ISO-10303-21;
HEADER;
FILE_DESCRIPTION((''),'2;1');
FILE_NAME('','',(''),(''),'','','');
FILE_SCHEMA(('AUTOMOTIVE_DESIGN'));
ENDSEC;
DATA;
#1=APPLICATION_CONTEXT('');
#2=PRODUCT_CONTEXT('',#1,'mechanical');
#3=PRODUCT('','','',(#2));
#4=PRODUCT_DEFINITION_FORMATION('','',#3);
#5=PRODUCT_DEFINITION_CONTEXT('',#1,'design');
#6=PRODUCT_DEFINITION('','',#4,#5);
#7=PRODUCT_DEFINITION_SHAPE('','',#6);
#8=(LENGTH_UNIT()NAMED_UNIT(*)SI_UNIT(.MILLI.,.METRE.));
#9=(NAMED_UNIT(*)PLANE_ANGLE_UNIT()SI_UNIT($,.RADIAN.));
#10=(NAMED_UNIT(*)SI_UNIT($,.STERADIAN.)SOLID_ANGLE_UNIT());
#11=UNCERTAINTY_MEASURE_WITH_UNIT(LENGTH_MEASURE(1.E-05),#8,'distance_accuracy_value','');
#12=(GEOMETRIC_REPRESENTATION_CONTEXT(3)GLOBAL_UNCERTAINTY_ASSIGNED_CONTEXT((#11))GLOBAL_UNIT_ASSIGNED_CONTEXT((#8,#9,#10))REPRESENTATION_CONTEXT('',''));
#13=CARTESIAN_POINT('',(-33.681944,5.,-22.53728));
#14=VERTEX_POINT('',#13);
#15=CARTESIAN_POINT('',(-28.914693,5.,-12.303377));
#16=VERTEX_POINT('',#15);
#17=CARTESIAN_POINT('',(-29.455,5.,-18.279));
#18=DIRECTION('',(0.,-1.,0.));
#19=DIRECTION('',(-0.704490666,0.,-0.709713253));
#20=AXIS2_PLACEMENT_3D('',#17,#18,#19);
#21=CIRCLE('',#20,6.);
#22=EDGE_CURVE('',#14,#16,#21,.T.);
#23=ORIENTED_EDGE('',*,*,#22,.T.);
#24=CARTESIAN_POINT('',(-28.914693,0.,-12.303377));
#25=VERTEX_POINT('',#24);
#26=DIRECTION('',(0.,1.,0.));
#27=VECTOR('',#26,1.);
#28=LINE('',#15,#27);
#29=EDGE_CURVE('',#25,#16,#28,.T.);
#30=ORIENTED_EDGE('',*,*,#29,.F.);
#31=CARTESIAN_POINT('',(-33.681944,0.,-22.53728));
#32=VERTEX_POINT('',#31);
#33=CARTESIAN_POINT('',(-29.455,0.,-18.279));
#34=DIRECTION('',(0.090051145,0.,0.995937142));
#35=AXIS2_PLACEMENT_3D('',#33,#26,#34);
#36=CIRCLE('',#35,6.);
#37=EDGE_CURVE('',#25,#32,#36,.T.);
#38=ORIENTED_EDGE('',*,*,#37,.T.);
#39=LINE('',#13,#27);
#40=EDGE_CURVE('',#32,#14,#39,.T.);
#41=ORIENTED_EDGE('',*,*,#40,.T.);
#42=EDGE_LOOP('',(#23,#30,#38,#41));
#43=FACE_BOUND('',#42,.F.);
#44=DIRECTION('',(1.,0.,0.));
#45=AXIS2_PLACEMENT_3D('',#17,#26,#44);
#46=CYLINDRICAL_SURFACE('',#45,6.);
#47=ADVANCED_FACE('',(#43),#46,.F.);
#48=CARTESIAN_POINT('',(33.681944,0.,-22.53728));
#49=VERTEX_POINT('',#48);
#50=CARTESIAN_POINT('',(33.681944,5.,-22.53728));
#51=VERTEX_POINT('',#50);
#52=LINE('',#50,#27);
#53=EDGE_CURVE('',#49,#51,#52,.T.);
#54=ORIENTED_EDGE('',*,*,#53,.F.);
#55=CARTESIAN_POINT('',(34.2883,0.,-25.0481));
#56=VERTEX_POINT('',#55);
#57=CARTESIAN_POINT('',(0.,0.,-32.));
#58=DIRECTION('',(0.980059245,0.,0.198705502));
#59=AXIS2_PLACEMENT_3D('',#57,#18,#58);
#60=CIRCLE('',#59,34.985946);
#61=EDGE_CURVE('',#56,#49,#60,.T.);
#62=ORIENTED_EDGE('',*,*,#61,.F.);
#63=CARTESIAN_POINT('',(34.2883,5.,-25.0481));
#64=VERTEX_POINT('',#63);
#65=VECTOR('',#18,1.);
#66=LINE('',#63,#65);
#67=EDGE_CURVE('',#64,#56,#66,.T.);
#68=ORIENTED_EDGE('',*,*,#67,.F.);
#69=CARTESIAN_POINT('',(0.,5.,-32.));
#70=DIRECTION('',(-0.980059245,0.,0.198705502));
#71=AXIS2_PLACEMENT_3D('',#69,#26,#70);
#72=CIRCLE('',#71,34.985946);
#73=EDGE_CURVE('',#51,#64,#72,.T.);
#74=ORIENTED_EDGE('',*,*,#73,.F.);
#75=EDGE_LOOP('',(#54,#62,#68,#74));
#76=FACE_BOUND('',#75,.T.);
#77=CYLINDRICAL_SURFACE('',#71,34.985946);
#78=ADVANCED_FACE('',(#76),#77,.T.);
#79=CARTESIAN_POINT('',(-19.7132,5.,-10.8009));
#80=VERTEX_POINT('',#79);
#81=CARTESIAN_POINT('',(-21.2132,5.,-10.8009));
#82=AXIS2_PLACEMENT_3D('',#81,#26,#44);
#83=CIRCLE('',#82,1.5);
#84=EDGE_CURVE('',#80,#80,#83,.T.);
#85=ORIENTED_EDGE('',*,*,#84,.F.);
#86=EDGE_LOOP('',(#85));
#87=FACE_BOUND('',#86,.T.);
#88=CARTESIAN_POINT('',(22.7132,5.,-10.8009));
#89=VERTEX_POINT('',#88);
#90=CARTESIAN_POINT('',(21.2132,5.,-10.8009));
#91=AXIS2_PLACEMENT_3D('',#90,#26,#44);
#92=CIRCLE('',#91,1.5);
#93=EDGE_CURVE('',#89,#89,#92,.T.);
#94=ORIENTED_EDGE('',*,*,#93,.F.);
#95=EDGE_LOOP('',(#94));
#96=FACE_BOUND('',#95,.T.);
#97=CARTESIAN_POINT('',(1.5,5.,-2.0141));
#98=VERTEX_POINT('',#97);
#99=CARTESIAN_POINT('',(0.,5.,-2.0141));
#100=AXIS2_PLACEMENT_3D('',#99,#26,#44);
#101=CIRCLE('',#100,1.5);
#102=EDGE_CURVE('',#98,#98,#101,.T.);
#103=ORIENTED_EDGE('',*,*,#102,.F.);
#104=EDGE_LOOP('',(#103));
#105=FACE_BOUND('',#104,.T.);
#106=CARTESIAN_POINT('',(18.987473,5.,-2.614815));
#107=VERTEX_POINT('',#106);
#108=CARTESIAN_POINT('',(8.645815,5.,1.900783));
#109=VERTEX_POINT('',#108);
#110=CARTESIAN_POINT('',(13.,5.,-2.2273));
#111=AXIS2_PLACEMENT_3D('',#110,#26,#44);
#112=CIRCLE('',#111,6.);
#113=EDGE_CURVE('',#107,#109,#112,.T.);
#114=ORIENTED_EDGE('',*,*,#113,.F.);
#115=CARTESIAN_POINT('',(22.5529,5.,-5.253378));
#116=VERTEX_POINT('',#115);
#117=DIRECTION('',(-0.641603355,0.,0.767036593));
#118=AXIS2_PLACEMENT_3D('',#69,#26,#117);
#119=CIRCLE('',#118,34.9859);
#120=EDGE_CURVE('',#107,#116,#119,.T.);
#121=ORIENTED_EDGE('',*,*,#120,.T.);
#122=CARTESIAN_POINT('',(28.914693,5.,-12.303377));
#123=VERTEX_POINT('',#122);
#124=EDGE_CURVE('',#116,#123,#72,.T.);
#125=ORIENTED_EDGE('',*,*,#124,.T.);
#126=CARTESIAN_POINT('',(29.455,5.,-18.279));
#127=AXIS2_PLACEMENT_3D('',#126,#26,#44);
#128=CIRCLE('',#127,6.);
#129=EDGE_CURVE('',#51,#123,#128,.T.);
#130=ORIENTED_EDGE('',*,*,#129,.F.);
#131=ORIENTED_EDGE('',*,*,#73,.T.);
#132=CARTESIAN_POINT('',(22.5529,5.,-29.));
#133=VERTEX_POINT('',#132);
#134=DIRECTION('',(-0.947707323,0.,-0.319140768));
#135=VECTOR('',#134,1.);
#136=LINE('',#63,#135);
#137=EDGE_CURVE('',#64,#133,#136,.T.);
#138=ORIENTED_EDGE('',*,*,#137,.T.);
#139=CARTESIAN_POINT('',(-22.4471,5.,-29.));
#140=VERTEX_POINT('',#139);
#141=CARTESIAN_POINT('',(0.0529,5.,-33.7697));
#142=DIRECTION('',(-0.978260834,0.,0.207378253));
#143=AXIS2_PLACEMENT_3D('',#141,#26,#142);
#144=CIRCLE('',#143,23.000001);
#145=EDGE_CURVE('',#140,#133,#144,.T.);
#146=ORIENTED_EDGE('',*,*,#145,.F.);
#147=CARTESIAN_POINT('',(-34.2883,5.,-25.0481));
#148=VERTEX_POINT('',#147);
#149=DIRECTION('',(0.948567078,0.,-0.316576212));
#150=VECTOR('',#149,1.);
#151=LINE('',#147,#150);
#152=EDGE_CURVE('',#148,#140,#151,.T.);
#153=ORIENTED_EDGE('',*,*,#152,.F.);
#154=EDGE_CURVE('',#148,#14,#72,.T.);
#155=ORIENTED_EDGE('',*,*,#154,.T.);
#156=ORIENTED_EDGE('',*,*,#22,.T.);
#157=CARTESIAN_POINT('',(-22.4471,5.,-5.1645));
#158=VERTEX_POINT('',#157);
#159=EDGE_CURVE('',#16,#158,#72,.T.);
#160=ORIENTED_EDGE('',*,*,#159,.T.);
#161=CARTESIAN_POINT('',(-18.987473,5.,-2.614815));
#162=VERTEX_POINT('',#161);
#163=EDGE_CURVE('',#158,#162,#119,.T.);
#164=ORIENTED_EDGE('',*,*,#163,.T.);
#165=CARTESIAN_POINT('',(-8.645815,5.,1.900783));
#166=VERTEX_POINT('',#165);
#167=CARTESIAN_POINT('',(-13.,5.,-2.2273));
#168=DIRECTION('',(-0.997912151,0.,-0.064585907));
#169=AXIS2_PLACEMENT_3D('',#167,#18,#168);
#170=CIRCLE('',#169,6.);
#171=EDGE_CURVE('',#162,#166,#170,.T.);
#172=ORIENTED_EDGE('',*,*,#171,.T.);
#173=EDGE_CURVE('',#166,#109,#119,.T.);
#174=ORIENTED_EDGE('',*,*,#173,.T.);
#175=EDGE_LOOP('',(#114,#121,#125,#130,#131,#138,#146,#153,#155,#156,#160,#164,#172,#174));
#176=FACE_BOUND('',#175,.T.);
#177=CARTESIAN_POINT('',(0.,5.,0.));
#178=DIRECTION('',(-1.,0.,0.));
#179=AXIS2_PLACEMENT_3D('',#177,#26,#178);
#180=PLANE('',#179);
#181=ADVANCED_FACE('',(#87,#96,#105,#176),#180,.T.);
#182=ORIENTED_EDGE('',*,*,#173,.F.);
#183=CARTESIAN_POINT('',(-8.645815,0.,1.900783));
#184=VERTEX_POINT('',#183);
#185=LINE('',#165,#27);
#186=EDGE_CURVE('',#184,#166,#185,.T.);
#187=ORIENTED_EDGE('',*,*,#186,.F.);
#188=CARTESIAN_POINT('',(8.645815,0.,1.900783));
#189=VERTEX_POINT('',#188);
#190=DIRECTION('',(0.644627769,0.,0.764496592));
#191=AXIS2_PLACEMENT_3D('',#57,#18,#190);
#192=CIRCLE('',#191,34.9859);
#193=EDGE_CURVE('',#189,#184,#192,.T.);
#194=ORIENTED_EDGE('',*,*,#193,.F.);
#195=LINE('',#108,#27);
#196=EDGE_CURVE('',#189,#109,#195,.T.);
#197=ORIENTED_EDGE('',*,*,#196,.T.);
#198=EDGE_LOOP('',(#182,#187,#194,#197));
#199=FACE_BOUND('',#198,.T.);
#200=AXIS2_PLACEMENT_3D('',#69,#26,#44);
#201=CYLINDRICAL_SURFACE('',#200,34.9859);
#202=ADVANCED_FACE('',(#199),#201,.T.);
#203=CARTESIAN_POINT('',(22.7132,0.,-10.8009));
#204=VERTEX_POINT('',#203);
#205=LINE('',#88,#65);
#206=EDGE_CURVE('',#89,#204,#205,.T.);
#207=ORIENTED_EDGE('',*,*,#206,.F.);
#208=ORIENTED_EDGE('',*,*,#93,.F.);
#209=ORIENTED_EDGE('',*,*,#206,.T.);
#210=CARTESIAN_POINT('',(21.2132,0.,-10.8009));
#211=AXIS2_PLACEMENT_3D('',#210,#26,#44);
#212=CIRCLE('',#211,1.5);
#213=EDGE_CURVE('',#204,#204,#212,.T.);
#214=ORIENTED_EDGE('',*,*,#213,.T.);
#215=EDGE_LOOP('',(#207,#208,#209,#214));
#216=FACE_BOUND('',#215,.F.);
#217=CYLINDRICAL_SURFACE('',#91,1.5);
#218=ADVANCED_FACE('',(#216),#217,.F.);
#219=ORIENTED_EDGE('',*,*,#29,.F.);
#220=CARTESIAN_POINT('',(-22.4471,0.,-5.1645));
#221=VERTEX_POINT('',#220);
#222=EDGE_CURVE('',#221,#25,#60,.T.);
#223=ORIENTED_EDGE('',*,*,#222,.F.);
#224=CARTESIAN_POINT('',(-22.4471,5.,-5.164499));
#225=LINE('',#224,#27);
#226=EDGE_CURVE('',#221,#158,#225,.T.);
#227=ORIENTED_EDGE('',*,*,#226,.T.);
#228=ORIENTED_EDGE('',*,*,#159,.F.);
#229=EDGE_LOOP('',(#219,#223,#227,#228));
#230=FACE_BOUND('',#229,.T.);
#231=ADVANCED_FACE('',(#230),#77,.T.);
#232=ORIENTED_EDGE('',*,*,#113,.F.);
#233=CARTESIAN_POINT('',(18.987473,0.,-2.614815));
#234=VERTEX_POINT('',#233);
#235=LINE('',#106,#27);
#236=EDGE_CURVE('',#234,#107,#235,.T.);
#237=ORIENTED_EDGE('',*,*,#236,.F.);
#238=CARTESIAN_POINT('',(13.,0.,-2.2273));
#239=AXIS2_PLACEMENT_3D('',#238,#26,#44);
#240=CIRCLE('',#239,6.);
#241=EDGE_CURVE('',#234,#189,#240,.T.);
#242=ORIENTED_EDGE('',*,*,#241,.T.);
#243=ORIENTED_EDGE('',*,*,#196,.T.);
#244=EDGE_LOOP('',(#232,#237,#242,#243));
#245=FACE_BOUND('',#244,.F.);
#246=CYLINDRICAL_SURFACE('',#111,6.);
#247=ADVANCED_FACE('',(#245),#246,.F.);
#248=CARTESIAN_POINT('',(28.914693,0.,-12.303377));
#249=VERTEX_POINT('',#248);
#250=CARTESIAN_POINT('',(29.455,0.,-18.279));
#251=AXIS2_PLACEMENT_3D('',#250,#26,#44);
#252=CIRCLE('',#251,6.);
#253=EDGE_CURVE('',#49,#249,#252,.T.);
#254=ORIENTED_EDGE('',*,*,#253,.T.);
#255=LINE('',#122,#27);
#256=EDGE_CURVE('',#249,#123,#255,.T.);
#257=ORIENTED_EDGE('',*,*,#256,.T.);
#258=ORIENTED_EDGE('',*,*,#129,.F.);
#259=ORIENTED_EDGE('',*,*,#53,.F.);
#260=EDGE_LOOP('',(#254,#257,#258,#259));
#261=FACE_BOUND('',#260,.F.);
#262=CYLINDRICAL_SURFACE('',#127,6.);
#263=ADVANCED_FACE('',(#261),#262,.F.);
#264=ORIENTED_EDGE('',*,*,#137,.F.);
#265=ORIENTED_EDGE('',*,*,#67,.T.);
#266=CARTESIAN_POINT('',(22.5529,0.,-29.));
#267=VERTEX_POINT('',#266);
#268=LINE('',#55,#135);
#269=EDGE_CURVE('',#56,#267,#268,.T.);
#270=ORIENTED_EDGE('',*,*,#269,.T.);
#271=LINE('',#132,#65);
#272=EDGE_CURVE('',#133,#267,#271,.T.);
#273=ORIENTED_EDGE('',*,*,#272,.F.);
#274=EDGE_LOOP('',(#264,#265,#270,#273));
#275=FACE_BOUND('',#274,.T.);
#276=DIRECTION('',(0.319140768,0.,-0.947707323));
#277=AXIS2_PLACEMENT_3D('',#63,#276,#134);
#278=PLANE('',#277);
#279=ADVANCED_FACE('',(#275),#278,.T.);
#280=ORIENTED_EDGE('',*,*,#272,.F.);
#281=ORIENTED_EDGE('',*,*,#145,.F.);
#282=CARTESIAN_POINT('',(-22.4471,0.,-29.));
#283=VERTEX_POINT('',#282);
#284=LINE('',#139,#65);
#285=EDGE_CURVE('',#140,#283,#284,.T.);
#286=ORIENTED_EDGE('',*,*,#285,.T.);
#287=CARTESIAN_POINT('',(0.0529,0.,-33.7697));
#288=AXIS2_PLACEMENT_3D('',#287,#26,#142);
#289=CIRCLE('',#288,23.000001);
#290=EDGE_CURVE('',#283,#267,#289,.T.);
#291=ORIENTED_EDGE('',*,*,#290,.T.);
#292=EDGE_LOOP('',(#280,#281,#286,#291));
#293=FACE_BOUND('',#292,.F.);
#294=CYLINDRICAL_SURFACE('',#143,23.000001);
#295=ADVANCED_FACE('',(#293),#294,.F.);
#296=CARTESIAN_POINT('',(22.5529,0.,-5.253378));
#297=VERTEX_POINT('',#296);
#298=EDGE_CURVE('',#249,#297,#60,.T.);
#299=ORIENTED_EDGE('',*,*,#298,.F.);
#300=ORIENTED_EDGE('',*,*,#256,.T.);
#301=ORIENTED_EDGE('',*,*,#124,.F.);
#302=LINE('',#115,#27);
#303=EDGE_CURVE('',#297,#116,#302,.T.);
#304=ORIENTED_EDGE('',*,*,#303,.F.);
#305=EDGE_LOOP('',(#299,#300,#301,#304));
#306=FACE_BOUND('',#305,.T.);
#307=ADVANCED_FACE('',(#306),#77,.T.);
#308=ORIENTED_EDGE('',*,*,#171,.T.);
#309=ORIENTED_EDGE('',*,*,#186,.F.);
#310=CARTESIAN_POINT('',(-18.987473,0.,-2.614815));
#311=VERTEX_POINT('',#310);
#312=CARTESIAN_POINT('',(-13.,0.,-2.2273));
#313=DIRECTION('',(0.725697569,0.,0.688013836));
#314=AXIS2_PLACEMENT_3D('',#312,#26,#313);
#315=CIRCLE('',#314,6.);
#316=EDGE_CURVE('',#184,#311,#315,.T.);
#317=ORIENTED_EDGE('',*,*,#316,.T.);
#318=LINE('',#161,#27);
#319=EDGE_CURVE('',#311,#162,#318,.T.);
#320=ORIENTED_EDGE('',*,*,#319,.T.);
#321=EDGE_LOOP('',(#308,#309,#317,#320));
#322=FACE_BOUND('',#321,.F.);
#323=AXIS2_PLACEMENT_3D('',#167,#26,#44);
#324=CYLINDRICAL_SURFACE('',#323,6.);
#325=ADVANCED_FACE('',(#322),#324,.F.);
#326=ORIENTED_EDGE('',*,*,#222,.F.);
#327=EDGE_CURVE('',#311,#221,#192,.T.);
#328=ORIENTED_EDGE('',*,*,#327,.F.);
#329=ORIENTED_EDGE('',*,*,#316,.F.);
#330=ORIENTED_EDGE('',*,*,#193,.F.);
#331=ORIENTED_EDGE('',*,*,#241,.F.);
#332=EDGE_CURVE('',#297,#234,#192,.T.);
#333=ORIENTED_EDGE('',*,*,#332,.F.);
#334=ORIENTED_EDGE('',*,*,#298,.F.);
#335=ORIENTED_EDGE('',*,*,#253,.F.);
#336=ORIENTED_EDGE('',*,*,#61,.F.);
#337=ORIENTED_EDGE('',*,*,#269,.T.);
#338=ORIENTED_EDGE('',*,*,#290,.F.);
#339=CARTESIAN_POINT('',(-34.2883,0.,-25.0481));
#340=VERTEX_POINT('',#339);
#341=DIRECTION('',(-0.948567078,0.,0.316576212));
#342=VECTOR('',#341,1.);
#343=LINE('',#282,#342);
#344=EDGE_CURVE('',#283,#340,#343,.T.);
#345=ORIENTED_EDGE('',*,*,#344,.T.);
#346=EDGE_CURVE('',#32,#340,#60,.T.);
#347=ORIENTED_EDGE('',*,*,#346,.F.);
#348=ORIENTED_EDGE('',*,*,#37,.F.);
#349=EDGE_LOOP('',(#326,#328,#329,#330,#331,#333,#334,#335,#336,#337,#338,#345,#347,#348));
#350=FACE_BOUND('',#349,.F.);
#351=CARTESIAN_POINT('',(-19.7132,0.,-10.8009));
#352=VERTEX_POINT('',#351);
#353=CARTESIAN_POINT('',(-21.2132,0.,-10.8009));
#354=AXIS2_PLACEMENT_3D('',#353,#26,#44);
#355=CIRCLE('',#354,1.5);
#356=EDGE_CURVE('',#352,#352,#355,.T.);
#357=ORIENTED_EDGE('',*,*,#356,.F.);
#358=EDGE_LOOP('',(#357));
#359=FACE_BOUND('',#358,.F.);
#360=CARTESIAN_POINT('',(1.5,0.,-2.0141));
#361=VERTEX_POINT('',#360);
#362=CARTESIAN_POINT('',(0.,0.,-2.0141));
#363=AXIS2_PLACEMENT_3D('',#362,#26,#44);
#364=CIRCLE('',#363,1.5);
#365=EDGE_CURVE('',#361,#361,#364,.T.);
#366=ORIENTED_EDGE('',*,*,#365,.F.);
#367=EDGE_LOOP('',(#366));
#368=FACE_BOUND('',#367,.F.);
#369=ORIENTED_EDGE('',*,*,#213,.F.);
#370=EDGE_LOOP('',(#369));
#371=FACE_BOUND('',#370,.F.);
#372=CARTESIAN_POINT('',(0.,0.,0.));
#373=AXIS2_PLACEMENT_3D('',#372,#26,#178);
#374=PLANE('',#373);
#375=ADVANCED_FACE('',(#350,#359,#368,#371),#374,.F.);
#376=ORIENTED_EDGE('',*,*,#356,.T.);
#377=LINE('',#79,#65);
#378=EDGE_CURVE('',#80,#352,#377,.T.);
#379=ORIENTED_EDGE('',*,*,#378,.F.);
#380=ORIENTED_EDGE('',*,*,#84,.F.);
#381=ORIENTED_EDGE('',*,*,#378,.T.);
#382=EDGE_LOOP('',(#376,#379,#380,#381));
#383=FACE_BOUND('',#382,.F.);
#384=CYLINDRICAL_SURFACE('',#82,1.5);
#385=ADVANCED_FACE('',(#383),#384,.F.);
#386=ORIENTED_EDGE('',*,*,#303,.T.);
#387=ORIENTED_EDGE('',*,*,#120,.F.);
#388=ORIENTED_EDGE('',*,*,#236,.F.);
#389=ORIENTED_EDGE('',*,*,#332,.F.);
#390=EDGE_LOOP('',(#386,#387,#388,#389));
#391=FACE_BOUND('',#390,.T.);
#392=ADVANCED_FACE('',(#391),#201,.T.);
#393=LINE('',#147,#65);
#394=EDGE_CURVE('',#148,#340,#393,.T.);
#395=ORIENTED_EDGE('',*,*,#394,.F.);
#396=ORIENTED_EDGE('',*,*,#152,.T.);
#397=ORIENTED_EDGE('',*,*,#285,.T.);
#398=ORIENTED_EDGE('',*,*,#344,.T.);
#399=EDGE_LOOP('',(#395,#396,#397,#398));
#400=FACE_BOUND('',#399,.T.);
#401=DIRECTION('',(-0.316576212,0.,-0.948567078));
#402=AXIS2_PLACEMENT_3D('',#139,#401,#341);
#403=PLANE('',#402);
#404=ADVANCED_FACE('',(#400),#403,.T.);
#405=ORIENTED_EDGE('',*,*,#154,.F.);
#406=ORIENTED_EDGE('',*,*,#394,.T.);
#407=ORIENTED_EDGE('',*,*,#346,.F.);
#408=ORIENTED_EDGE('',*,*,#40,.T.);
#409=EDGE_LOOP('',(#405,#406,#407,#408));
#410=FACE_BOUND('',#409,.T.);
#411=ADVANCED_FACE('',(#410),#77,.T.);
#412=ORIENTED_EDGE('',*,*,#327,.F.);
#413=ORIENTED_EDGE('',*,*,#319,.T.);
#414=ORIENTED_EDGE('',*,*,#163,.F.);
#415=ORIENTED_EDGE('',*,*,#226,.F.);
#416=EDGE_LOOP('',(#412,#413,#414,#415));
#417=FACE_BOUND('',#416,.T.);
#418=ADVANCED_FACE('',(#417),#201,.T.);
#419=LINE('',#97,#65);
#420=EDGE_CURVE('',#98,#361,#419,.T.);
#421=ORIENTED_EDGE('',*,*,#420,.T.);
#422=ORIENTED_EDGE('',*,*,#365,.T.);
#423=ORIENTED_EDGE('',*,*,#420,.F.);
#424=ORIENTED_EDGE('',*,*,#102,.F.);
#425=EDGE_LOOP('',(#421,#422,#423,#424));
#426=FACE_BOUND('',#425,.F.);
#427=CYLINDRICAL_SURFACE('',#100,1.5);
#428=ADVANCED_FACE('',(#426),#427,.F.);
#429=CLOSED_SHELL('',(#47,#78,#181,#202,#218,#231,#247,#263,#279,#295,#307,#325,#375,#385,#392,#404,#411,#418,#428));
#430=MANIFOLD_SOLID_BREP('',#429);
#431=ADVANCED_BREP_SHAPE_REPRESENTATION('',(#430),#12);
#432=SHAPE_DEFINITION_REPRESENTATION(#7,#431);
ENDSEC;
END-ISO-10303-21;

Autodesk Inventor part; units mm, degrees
ref_plane "YZ Plane" through (0, 0, 0) normal (1, 0, 0) x (0, 1, 0)
ref_plane "XZ Plane" through (0, 0, 0) normal (0, 1, 0) x (-1, 0, 0)
ref_plane "XY Plane" through (0, 0, 0) normal (0, 0, 1) x (1, 0, 0)
sketch "Sketch1" plane through (0, 0, 0) normal (0, 1, 0) x (-1, 0, 0)
  line L0 (-22.5529, -44.0141) -> (22.4471, -44.0141)
  line L1 (-22.5529, -44.0141) -> (22.4471, -44.0141)
  line L2 (22.4471, 2.9859) -> (22.4471, -44.0141)
  line L3 (22.4471, 2.9859) -> (12.4471, 2.9859)
  line L4 (-22.5529, 2.9859) -> (-22.5529, -44.0141)
  line L5 (-22.5529, 2.9859) -> (-12.4471, 2.9859)
  arc A0 (-12.4471, 2.9859) -> (12.4471, 2.9859) centre (0, 4.1349) ccw
  circle A1 centre (-18.0529, -7.0141) radius 1.95
  circle A2 centre (-18.0529, -7.0141) radius 1.95
  circle A3 centre (17.9471, -7.0141) radius 1.95
  circle A4 centre (17.9471, -7.0141) radius 1.95
  circle A5 centre (0, -32.0141) radius 5.1
  circle A6 centre (-18.0529, -24.0142) radius 2
  circle A7 centre (-18, -40.0141) radius 2
  circle A8 centre (18, -40.0141) radius 2
  circle A9 centre (17.9471, -24.0142) radius 2
  line L6 (0, 4.1349) -> (0, -32.0141) construction
  point P0 (0, 0)
  dimension "d0" = 45
  dimension "d3" = 10
  dimension "d4" = 12.5
  dimension "d7" = 4.5
  dimension "d8" = 10
  dimension "d9" = 12
  dimension "d10" = 4
  dimension "d11" = 16
  dimension "d12" = 36
  dimension "d13" = 16
  dimension "d14" = 4.5
  dimension "d15" = 18
  dimension "d17" = 4.5
  dimension "d19" = 4
  dimension "d20" = 4
  dimension "d21" = 4
  dimension "d22" = 4
  dimension "d23" = 4
  dimension "d29" = 47
  dimension "d33" = 4.5
  dimension "d34" = 10
extrude "Extrusion1" add sketch "Sketch1" along normal blind 5
fillet "Fillet3" [suppressed]
fillet "Fillet4" [suppressed]
sketch "Sketch5" plane through (0, 5, 0) normal (0, 1, 0) x (1, 0, 0)
  arc A0 (12.4471, -2.9859) -> (-12.4471, -2.9859) centre (0, -4.1349) ccw projected
  arc A1 (12.4471, -2.9859) -> (-12.4471, -2.9859) centre (0, -4.1349) ccw
  line L0 (12.4471, -2.9859) -> (-12.4471, -2.9859)
  circle A2 centre (18.0529, 7.0141) radius 1.95 projected
  circle A3 centre (18.0529, 7.0141) radius 1.95
  circle A4 centre (-17.9471, 7.0141) radius 1.95 projected
  circle A5 centre (-17.9471, 7.0141) radius 1.95
  point P0 (0, 0)
extrude "Extrusion4" add sketch "Sketch5" against normal blind 5
sketch "Sketch8" plane through (0, 5, 0) normal (0, 1, 0) x (1, 0, 0)
  arc A0 (-25.3055, 28.046) -> (25.3055, 28.046) centre (0, 32) ccw
  arc A1 (-34.2883, 25.0481) -> (34.2883, 25.0481) centre (0, 32) ccw
  line L0 (-22.4471, -2.9859) -> (22.5529, -2.9859) projected
  line L1 (-22.4471, 44.0141) -> (-22.4471, -2.9859) projected
  line L2 (-22.4471, 29) -> (-34.2883, 25.0481)
  circle A2 centre (0, 32.0141) radius 5.1 projected
  line L3 (0, 32.0141) -> (0, 0) construction
  line L4 (-22.4471, 29) -> (-22.4471, 19.666)
  line L5 (34.2883, 25.0481) -> (22.5529, 29)
  line L6 (22.5529, -2.9859) -> (22.5529, 44.0141) projected
  line L7 (22.5529, 29) -> (22.5529, 19.8606)
extrude "Extrusion5" add sketch "Sketch8" against normal blind 5 contours L2 L1 A0 | A0 L1 A1 L2 | A0 L6 A1 L1 | L6 L5 A1
sketch "Sketch9" plane through (0, 5, 0) normal (0, 1, 0) x (1, 0, 0)
  circle A0 centre (0, 32) radius 34.9859
  line L0 (-22.4471, -2.9859) -> (22.5529, -2.9859) projected
  line L1 (22.5529, -2.9859) -> (22.5529, 5.2534) projected
  line L2 (22.5529, 5.2534) -> (22.5529, -2.9859)
  line L3 (22.5529, -2.9859) -> (-22.4471, -2.9859)
  line L4 (-22.4471, -2.9859) -> (-22.4471, 5.1645)
  point P0 (0, 0)
  point P1 (0, -2.9859)
sketch "Sketch6" plane through (0, 5, 0) normal (0, 1, 0) x (1, 0, 0)
  circle A0 centre (0, 32.0141) radius 5.1 projected
  circle A1 centre (0, 32.0141) radius 32.5 construction
  line L0 (0, 32.0141) -> (0, -0.4859) construction
  line L1 (0, 32.0141) -> (-13.7351, 2.5591) construction
  line L2 (0, 32.0141) -> (-29.455, 18.279) construction
  circle A2 centre (-13, 2.2273) radius 6
  circle A3 centre (-29.455, 18.279) radius 6
  circle A4 centre (13, 2.2273) radius 6
  circle A5 centre (29.455, 18.279) radius 6
  point P0 (0, 0)
  dimension "d49" = 65
  dimension "d50" = 12
  dimension "d51" = 12
  dimension "d52" = 25
  dimension "d53" = 40
extrude "Extrusion6" cut sketch "Sketch9" against normal blind 5 contours A0 L0 L4 | L1 L0 A0
extrude "Extrusion7" cut sketch "Sketch6" against normal blind 5 contours A2 | A3 | A4 | A5
sketch "Sketch10" plane through (0, 5, 0) normal (0, 1, 0) x (1, 0, 0)
  arc A0 (18.9875, 2.6148) -> (8.6459, -1.9008) centre (13, 2.2273) ccw projected
  circle A1 centre (13, 2.2273) radius 8.25 construction
  arc A2 (-8.6459, -1.9008) -> (-18.9875, 2.6148) centre (-13, 2.2273) ccw projected
  circle A3 centre (-13, 2.2273) radius 8.25 construction
  arc A4 (-28.9147, 12.3034) -> (-33.6819, 22.5373) centre (-29.455, 18.279) ccw projected
  circle A5 centre (-29.455, 18.279) radius 8.25 construction
  arc A6 (33.6819, 22.5373) -> (28.9147, 12.3034) centre (29.455, 18.279) ccw projected
  circle A7 centre (29.455, 18.279) radius 8.25 construction
  circle A8 centre (0, 32.0141) radius 5.1 projected
  circle A9 centre (0, 32.0141) radius 30 construction
  circle A10 centre (21.2132, 10.8009) radius 1.5
  circle A11 centre (0, 2.0141) radius 1.5
  circle A12 centre (-21.2132, 10.8009) radius 1.5
  line L0 (21.2132, 10.8009) -> (0, 32.0141) construction
  line L1 (0, 32.0141) -> (0, 2.0141) construction
  line L2 (0, 32.0141) -> (-21.2132, 10.8009) construction
  point P0 (0, 0)
  dimension "d60" = 16.5
  dimension "d61" = 16.5
  dimension "d62" = 16.5
  dimension "d63" = 16.5
  dimension "d64" = 60
  dimension "d65" = 3
  dimension "d66" = 3
  dimension "d67" = 3
  dimension "d68" = 45
extrude "Extrusion8" cut sketch "Sketch10" against normal blind 10 contours A10 | A11 | A12
sketch "Sketch11" plane through (0, 5, 0) normal (0, 1, 0) x (1, 0, 0)
  line L0 (22.5529, 29) -> (22.5529, 44.0141) projected
  arc A0 (-22.4471, 29) -> (22.5529, 29) centre (0.0529, 33.7697) ccw
  line L1 (22.5529, 29) -> (22.5529, 44.0141)
  line L2 (22.5529, 44.0141) -> (-22.4471, 44.0141) projected
  line L3 (-22.4471, 44.0141) -> (-22.4471, 29)
  point P0 (0, 0)
  dimension "d71" = 23
extrude "Extrusion9" cut sketch "Sketch11" against normal blind 10
properties part number "Plunger Holder"
